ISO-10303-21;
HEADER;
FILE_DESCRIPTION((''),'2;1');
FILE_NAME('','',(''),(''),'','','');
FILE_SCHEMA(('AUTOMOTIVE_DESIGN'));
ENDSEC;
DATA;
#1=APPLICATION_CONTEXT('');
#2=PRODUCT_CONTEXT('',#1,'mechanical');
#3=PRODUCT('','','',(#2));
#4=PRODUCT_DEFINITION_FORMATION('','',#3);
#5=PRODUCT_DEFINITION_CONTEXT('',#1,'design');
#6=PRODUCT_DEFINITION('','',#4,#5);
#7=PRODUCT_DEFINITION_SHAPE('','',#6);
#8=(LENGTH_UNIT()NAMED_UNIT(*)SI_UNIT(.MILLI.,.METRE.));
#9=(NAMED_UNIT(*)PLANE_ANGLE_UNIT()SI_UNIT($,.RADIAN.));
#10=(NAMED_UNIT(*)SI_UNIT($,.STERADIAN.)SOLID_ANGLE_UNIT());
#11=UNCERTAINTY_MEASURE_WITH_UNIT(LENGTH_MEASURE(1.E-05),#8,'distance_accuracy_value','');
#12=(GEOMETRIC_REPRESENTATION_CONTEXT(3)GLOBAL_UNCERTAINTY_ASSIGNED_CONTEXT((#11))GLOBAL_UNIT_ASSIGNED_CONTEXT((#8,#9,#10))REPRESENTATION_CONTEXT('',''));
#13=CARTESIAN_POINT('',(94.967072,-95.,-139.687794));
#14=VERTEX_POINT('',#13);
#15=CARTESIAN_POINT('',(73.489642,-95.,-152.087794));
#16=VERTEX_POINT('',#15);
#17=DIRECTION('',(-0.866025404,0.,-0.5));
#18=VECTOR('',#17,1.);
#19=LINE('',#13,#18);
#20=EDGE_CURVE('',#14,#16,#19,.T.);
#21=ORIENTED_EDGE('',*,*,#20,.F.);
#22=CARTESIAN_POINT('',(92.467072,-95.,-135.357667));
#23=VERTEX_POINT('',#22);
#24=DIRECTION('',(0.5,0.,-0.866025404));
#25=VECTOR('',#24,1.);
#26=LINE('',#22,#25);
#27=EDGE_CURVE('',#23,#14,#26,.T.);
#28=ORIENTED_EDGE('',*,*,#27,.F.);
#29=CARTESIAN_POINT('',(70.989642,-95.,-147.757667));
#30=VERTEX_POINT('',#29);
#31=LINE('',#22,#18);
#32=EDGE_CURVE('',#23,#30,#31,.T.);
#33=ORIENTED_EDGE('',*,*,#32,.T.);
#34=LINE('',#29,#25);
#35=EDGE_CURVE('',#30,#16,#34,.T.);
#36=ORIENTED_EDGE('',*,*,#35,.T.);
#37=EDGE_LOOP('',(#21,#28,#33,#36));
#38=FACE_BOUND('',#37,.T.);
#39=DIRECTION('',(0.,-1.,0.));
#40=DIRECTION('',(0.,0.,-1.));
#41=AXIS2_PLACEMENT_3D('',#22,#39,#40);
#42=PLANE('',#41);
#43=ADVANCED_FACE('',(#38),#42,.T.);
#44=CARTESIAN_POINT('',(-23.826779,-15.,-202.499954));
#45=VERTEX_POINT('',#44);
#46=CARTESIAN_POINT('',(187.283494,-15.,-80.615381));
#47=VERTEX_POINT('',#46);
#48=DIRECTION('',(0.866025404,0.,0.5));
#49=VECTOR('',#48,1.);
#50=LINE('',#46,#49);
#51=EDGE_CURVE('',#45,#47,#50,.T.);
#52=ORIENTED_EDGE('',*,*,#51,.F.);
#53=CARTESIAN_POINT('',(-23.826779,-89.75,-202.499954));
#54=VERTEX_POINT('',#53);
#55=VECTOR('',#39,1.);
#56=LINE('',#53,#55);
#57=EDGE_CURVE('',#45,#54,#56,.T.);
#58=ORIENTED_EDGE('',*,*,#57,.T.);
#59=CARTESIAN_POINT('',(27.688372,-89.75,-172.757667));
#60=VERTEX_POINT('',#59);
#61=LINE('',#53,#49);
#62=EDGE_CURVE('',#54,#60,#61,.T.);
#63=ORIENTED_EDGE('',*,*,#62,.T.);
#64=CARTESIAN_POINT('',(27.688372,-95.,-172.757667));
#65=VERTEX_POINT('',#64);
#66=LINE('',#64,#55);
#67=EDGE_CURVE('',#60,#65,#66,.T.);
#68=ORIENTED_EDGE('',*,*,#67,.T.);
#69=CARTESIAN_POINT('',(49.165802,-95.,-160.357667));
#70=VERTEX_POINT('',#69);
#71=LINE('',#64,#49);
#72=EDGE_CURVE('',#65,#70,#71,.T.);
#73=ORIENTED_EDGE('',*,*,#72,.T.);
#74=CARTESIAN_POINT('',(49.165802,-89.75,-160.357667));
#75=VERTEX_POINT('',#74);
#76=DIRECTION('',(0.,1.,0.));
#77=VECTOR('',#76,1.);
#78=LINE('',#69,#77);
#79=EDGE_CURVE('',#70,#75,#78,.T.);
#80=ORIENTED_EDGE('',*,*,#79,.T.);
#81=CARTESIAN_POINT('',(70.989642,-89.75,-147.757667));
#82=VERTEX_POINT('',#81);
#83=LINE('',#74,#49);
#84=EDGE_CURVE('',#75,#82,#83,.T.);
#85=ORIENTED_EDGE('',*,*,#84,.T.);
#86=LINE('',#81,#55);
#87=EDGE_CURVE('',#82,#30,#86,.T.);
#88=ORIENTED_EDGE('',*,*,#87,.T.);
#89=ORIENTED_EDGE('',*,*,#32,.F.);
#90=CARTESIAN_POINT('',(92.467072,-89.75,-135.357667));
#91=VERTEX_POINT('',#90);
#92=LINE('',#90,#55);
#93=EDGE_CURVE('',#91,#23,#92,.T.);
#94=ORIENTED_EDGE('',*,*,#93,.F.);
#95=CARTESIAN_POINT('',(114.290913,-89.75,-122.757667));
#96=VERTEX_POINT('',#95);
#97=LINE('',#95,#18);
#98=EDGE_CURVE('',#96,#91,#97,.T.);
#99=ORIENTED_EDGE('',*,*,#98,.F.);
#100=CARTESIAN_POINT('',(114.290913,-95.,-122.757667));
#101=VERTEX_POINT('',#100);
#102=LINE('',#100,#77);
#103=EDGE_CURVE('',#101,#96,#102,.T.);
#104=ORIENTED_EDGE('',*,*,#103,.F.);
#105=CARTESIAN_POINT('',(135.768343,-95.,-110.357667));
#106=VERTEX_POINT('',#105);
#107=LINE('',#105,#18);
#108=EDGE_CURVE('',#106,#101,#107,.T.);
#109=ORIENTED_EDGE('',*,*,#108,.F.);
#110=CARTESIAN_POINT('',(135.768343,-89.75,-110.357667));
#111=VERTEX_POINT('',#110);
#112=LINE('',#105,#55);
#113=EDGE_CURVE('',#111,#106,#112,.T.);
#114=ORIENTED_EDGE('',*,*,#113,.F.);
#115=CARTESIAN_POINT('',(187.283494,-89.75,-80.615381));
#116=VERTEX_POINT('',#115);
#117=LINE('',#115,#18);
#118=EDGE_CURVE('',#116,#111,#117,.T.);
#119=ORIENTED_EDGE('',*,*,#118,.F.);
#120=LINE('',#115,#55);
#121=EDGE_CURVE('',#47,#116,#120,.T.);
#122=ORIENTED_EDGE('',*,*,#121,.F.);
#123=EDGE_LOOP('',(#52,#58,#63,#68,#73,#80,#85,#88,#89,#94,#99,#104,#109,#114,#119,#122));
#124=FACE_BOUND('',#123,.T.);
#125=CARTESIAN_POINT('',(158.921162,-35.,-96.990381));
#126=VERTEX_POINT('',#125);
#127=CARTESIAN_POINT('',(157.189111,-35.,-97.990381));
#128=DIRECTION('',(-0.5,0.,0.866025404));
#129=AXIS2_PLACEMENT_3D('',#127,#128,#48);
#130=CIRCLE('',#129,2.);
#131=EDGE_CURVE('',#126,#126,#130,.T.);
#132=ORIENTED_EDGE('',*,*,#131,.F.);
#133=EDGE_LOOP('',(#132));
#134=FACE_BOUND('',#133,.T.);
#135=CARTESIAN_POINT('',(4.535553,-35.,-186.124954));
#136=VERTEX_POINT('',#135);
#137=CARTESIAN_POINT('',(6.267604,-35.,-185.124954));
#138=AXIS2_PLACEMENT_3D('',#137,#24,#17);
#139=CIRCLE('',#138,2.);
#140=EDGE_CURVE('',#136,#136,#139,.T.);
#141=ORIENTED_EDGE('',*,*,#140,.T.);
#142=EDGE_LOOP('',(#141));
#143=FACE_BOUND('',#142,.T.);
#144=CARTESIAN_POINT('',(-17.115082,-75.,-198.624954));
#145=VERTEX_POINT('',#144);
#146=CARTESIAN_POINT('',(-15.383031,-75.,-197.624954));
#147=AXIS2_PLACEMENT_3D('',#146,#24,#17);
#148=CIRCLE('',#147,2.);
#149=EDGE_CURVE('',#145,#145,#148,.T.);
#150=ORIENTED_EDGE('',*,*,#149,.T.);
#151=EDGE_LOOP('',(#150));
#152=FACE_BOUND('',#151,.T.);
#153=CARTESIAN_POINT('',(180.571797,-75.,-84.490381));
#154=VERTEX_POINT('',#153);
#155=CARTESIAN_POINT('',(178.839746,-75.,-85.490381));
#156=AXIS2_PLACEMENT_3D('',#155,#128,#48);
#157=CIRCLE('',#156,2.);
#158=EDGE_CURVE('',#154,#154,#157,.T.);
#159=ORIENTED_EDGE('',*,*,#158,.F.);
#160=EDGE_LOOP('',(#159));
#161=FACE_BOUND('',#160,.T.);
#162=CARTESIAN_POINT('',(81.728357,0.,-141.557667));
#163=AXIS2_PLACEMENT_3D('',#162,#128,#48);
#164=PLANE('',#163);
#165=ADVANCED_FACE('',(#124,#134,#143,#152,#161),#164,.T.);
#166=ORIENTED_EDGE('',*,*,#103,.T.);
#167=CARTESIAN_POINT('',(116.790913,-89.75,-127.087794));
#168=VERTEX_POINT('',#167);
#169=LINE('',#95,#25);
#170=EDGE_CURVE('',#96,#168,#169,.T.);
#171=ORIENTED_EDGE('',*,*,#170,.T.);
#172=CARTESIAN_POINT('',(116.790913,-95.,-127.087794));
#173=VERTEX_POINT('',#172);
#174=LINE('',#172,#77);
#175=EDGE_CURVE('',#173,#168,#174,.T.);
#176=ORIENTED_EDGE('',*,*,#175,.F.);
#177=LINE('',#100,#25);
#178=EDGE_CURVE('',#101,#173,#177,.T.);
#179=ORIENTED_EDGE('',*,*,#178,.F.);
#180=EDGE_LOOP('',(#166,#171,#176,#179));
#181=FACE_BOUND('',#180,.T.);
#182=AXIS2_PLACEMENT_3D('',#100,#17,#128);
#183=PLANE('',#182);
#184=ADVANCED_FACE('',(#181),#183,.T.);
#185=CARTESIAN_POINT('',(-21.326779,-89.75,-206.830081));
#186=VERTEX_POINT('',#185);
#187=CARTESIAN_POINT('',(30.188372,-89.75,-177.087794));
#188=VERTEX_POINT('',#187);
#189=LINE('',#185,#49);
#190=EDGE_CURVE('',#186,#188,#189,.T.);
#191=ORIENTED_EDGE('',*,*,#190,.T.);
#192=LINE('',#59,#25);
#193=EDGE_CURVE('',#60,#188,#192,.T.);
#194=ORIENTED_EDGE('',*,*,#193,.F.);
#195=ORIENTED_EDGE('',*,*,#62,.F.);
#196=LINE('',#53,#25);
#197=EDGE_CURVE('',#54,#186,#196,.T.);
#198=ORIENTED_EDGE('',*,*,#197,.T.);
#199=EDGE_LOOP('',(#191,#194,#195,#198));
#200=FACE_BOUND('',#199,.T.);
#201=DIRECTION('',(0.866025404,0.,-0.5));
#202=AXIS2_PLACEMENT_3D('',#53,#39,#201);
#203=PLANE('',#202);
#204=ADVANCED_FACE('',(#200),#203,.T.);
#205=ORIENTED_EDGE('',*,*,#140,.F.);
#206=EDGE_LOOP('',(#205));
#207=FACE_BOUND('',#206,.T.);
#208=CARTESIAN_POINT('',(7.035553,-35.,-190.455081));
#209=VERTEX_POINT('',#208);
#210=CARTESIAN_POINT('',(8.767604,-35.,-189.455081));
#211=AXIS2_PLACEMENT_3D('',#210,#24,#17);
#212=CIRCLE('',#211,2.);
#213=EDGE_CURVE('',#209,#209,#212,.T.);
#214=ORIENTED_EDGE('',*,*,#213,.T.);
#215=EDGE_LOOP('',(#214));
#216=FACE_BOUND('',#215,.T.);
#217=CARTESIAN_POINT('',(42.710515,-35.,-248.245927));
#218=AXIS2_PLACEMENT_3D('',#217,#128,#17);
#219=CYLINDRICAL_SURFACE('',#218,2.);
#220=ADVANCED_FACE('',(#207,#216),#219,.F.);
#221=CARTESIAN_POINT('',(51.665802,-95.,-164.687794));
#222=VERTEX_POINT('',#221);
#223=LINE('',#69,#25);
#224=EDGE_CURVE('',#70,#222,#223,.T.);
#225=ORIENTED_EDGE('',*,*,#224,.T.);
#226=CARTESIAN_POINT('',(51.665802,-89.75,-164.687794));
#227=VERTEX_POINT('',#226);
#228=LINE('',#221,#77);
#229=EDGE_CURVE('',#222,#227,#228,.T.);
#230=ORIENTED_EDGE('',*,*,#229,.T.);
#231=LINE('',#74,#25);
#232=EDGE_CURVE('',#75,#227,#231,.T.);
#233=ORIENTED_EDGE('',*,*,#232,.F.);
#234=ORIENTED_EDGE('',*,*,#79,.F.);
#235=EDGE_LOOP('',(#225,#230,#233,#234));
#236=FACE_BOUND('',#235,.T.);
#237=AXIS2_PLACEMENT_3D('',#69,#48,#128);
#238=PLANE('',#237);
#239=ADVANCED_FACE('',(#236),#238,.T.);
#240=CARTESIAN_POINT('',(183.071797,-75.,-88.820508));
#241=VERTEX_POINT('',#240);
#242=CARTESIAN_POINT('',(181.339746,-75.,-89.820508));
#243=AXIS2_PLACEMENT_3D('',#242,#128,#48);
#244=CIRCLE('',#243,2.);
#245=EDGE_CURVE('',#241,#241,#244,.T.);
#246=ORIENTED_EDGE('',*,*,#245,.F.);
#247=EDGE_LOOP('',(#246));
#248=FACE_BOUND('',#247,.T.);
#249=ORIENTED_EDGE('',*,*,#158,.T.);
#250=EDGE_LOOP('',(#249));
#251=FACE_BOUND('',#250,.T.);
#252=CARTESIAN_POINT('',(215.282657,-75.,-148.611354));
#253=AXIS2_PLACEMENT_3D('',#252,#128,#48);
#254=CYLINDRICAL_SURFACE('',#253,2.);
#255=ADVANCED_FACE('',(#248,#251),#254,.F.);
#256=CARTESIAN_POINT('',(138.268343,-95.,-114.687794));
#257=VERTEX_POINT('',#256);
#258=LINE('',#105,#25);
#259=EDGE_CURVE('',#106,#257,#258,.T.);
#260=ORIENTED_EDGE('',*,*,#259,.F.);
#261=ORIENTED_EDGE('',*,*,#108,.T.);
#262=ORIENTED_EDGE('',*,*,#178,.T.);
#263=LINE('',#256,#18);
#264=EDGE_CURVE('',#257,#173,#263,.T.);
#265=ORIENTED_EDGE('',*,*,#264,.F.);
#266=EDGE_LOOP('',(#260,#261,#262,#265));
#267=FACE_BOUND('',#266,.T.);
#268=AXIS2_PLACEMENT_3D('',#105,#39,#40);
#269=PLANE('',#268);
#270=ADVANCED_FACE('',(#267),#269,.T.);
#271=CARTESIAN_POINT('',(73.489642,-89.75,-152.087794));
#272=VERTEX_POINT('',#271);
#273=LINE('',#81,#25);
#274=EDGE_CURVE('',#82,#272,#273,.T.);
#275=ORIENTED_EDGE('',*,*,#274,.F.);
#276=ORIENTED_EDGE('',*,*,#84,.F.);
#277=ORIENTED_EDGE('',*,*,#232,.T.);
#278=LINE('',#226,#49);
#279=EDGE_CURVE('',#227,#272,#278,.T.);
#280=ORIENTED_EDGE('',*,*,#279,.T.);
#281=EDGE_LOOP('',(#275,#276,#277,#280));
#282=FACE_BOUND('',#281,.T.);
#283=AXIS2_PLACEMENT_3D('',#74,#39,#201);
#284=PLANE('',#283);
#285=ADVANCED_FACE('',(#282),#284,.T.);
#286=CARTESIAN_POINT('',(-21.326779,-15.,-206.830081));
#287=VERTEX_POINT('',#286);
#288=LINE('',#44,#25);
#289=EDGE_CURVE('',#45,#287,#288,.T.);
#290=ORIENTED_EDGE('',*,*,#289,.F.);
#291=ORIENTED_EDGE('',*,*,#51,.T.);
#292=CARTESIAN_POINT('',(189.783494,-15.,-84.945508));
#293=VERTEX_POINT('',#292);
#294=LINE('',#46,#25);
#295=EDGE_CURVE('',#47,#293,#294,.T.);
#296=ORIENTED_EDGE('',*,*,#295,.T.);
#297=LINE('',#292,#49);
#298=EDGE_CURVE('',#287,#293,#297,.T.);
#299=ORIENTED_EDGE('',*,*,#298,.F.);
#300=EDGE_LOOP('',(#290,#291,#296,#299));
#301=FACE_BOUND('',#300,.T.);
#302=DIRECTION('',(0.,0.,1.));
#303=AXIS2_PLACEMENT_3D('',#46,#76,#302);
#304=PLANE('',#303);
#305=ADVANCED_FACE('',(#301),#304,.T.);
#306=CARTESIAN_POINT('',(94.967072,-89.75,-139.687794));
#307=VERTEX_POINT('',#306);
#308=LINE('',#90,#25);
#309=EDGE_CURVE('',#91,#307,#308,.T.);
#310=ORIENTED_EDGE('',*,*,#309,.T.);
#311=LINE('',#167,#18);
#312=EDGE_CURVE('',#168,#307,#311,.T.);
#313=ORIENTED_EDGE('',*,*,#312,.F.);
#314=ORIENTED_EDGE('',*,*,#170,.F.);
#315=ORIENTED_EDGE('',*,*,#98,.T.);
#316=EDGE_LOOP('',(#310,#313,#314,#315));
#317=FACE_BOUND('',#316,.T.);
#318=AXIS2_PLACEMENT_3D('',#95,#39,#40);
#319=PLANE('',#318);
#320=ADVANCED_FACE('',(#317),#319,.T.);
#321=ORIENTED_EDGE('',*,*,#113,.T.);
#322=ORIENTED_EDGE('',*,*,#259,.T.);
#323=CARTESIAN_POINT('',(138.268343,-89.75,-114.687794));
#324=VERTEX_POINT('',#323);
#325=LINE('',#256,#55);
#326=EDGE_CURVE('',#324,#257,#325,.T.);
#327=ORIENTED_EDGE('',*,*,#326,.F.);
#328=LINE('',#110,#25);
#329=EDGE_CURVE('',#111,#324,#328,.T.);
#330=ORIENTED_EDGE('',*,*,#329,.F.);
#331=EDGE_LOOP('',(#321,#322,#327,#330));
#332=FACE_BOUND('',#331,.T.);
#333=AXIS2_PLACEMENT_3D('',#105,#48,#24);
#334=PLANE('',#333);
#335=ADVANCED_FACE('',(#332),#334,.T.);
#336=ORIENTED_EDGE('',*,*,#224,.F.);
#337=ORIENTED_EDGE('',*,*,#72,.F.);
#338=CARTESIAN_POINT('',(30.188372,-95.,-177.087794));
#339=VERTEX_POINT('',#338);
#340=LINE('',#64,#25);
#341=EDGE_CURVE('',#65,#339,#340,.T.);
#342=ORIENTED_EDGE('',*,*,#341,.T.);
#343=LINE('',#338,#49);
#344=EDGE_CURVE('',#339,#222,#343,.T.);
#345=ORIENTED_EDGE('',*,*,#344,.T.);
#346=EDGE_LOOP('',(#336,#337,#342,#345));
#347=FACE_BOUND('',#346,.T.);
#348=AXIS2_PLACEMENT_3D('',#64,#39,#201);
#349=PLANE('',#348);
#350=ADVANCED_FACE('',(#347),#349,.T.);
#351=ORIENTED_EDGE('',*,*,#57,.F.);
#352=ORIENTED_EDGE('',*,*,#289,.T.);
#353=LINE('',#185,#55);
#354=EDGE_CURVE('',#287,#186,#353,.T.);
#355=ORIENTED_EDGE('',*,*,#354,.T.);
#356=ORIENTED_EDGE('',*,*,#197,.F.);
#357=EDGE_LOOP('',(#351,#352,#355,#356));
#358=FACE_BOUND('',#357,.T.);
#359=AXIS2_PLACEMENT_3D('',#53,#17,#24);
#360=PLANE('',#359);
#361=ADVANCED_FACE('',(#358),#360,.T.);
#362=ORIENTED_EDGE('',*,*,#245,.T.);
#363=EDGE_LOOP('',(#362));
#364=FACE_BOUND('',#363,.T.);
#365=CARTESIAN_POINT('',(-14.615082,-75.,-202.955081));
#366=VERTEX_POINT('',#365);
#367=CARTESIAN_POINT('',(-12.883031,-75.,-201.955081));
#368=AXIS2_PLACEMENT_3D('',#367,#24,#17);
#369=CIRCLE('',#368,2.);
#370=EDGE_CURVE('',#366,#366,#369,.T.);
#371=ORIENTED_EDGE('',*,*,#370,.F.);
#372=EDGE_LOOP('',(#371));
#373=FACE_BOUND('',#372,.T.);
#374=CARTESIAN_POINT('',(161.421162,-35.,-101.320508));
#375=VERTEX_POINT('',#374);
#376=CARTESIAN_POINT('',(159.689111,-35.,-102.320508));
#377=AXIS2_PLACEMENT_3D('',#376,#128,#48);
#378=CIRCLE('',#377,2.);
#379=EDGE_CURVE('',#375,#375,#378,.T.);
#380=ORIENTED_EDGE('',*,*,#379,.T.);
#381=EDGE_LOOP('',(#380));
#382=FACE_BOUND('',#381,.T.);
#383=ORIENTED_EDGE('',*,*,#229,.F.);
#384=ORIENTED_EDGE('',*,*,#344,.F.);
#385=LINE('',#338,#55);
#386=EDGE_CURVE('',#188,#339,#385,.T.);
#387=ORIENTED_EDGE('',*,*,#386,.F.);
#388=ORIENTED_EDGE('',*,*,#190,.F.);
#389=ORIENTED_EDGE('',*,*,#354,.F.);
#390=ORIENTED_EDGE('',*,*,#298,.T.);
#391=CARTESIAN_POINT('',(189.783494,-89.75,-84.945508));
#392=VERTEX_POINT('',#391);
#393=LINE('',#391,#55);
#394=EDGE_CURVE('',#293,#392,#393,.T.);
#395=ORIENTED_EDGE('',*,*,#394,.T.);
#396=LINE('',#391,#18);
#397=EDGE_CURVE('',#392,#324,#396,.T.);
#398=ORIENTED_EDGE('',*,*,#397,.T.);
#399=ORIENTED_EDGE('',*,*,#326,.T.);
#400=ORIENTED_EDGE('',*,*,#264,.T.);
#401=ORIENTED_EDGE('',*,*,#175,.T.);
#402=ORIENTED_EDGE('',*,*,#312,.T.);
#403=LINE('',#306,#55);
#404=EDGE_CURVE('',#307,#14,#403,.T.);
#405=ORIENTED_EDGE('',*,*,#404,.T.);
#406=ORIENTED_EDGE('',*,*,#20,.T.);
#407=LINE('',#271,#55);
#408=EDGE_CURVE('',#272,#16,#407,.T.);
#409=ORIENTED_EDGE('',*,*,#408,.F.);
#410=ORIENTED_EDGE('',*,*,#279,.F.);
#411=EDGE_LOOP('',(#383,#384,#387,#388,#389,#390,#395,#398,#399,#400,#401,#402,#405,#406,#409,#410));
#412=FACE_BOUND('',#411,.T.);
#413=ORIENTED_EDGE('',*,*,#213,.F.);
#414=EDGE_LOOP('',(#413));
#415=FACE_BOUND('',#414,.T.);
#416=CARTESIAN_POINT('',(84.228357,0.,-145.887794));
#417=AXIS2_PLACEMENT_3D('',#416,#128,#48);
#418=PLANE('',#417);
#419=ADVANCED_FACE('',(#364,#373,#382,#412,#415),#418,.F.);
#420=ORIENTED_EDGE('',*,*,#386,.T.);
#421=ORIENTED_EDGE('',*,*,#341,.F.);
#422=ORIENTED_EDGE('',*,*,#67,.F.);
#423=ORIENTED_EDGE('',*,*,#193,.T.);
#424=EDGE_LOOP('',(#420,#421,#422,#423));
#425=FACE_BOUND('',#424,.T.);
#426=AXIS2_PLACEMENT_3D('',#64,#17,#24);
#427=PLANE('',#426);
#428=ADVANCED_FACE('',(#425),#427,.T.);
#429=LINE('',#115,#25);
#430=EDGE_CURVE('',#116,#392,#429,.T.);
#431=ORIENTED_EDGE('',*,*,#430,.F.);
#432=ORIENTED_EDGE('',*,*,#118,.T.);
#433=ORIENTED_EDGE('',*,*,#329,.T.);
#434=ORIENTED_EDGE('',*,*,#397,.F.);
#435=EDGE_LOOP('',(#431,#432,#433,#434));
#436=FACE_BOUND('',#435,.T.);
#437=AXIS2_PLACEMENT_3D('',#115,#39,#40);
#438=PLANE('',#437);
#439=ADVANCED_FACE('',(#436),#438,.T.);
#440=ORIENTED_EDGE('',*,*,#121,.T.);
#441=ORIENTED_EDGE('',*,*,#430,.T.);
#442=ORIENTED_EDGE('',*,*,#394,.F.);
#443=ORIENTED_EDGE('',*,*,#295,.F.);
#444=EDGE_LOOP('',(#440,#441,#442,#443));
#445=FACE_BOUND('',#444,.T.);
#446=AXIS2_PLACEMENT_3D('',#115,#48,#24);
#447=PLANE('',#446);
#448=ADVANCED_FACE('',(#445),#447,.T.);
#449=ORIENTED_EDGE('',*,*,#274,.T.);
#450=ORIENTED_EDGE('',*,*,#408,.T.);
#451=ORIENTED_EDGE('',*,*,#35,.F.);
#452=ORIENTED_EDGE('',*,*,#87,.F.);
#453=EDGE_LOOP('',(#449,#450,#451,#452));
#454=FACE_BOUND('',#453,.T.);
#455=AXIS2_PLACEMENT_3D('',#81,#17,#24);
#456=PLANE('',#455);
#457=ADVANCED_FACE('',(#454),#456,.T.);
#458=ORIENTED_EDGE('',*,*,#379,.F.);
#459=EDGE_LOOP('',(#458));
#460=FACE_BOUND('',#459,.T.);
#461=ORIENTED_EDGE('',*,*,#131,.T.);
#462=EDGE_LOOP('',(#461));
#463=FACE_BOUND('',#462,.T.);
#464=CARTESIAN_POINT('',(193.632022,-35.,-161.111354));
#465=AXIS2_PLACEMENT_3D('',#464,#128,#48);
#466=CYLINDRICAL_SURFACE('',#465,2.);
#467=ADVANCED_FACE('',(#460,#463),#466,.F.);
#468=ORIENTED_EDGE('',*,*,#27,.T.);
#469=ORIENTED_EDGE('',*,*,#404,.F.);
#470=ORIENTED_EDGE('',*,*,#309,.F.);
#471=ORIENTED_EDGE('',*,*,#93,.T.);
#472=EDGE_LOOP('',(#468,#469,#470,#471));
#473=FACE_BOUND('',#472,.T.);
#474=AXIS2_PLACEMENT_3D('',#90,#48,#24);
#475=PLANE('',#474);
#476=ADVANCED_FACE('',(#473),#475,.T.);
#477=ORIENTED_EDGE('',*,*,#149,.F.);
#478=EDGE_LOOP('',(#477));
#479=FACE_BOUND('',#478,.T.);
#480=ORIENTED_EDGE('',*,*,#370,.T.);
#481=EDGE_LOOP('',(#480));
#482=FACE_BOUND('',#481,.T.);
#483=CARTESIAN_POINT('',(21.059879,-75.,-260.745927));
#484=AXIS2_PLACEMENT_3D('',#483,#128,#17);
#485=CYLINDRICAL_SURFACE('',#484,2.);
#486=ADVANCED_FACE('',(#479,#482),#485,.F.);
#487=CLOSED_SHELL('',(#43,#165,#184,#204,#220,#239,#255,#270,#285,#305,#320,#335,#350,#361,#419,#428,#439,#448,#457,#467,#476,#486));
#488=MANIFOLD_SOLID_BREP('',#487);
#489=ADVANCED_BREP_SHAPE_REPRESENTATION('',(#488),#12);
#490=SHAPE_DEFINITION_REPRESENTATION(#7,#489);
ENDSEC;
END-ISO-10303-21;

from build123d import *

# Parameters (mm, degrees)
STOCK_FRAME_MASTER_1_START     = 163.456714755
STOCK_FRAME_MASTER_1_OUTLINE_R = 2
STOCK_FRAME_MASTER_1_DEPTH     = 5


# Read off the part's stored shape, not the designer's step: Stock-frame-master-1
with BuildPart() as part:
    # Stock-frame-master-1 outline → Stock-frame-master-1 (new body)
    with BuildSketch(Plane(origin=(0, 0, 0), x_dir=(0.866025403784438, 0, 0.500000000000001), z_dir=(0.500000000000001, 0, -0.866025403784438)).offset(STOCK_FRAME_MASTER_1_START)):
        Polygon((0, 15), (121.884572681, 15), (121.884572681, 89.75), (62.4, 89.75), (62.4, 95), (37.6, 95), (37.6, 89.75), (12.4, 89.75), (12.4, 95), (0, 95), align=None)
        with Locations((87.134572681, 35)):
            Circle(STOCK_FRAME_MASTER_1_OUTLINE_R, mode=Mode.SUBTRACT)
        with Locations((112.134572681, 75)):
            Circle(STOCK_FRAME_MASTER_1_OUTLINE_R, mode=Mode.SUBTRACT)
    extrude(amount=STOCK_FRAME_MASTER_1_DEPTH)

    # Mirror1: part across plane


with BuildPart() as part_1:
    add(part.part)
    add(part.part.mirror(Plane(origin=(81.728357378, -89.75, -141.557667397), x_dir=(-0.5000000000000008, 0, 0.8660254037844382), z_dir=(-0.8660254037844383, 0, -0.5000000000000008))))


solid = part_1.part
